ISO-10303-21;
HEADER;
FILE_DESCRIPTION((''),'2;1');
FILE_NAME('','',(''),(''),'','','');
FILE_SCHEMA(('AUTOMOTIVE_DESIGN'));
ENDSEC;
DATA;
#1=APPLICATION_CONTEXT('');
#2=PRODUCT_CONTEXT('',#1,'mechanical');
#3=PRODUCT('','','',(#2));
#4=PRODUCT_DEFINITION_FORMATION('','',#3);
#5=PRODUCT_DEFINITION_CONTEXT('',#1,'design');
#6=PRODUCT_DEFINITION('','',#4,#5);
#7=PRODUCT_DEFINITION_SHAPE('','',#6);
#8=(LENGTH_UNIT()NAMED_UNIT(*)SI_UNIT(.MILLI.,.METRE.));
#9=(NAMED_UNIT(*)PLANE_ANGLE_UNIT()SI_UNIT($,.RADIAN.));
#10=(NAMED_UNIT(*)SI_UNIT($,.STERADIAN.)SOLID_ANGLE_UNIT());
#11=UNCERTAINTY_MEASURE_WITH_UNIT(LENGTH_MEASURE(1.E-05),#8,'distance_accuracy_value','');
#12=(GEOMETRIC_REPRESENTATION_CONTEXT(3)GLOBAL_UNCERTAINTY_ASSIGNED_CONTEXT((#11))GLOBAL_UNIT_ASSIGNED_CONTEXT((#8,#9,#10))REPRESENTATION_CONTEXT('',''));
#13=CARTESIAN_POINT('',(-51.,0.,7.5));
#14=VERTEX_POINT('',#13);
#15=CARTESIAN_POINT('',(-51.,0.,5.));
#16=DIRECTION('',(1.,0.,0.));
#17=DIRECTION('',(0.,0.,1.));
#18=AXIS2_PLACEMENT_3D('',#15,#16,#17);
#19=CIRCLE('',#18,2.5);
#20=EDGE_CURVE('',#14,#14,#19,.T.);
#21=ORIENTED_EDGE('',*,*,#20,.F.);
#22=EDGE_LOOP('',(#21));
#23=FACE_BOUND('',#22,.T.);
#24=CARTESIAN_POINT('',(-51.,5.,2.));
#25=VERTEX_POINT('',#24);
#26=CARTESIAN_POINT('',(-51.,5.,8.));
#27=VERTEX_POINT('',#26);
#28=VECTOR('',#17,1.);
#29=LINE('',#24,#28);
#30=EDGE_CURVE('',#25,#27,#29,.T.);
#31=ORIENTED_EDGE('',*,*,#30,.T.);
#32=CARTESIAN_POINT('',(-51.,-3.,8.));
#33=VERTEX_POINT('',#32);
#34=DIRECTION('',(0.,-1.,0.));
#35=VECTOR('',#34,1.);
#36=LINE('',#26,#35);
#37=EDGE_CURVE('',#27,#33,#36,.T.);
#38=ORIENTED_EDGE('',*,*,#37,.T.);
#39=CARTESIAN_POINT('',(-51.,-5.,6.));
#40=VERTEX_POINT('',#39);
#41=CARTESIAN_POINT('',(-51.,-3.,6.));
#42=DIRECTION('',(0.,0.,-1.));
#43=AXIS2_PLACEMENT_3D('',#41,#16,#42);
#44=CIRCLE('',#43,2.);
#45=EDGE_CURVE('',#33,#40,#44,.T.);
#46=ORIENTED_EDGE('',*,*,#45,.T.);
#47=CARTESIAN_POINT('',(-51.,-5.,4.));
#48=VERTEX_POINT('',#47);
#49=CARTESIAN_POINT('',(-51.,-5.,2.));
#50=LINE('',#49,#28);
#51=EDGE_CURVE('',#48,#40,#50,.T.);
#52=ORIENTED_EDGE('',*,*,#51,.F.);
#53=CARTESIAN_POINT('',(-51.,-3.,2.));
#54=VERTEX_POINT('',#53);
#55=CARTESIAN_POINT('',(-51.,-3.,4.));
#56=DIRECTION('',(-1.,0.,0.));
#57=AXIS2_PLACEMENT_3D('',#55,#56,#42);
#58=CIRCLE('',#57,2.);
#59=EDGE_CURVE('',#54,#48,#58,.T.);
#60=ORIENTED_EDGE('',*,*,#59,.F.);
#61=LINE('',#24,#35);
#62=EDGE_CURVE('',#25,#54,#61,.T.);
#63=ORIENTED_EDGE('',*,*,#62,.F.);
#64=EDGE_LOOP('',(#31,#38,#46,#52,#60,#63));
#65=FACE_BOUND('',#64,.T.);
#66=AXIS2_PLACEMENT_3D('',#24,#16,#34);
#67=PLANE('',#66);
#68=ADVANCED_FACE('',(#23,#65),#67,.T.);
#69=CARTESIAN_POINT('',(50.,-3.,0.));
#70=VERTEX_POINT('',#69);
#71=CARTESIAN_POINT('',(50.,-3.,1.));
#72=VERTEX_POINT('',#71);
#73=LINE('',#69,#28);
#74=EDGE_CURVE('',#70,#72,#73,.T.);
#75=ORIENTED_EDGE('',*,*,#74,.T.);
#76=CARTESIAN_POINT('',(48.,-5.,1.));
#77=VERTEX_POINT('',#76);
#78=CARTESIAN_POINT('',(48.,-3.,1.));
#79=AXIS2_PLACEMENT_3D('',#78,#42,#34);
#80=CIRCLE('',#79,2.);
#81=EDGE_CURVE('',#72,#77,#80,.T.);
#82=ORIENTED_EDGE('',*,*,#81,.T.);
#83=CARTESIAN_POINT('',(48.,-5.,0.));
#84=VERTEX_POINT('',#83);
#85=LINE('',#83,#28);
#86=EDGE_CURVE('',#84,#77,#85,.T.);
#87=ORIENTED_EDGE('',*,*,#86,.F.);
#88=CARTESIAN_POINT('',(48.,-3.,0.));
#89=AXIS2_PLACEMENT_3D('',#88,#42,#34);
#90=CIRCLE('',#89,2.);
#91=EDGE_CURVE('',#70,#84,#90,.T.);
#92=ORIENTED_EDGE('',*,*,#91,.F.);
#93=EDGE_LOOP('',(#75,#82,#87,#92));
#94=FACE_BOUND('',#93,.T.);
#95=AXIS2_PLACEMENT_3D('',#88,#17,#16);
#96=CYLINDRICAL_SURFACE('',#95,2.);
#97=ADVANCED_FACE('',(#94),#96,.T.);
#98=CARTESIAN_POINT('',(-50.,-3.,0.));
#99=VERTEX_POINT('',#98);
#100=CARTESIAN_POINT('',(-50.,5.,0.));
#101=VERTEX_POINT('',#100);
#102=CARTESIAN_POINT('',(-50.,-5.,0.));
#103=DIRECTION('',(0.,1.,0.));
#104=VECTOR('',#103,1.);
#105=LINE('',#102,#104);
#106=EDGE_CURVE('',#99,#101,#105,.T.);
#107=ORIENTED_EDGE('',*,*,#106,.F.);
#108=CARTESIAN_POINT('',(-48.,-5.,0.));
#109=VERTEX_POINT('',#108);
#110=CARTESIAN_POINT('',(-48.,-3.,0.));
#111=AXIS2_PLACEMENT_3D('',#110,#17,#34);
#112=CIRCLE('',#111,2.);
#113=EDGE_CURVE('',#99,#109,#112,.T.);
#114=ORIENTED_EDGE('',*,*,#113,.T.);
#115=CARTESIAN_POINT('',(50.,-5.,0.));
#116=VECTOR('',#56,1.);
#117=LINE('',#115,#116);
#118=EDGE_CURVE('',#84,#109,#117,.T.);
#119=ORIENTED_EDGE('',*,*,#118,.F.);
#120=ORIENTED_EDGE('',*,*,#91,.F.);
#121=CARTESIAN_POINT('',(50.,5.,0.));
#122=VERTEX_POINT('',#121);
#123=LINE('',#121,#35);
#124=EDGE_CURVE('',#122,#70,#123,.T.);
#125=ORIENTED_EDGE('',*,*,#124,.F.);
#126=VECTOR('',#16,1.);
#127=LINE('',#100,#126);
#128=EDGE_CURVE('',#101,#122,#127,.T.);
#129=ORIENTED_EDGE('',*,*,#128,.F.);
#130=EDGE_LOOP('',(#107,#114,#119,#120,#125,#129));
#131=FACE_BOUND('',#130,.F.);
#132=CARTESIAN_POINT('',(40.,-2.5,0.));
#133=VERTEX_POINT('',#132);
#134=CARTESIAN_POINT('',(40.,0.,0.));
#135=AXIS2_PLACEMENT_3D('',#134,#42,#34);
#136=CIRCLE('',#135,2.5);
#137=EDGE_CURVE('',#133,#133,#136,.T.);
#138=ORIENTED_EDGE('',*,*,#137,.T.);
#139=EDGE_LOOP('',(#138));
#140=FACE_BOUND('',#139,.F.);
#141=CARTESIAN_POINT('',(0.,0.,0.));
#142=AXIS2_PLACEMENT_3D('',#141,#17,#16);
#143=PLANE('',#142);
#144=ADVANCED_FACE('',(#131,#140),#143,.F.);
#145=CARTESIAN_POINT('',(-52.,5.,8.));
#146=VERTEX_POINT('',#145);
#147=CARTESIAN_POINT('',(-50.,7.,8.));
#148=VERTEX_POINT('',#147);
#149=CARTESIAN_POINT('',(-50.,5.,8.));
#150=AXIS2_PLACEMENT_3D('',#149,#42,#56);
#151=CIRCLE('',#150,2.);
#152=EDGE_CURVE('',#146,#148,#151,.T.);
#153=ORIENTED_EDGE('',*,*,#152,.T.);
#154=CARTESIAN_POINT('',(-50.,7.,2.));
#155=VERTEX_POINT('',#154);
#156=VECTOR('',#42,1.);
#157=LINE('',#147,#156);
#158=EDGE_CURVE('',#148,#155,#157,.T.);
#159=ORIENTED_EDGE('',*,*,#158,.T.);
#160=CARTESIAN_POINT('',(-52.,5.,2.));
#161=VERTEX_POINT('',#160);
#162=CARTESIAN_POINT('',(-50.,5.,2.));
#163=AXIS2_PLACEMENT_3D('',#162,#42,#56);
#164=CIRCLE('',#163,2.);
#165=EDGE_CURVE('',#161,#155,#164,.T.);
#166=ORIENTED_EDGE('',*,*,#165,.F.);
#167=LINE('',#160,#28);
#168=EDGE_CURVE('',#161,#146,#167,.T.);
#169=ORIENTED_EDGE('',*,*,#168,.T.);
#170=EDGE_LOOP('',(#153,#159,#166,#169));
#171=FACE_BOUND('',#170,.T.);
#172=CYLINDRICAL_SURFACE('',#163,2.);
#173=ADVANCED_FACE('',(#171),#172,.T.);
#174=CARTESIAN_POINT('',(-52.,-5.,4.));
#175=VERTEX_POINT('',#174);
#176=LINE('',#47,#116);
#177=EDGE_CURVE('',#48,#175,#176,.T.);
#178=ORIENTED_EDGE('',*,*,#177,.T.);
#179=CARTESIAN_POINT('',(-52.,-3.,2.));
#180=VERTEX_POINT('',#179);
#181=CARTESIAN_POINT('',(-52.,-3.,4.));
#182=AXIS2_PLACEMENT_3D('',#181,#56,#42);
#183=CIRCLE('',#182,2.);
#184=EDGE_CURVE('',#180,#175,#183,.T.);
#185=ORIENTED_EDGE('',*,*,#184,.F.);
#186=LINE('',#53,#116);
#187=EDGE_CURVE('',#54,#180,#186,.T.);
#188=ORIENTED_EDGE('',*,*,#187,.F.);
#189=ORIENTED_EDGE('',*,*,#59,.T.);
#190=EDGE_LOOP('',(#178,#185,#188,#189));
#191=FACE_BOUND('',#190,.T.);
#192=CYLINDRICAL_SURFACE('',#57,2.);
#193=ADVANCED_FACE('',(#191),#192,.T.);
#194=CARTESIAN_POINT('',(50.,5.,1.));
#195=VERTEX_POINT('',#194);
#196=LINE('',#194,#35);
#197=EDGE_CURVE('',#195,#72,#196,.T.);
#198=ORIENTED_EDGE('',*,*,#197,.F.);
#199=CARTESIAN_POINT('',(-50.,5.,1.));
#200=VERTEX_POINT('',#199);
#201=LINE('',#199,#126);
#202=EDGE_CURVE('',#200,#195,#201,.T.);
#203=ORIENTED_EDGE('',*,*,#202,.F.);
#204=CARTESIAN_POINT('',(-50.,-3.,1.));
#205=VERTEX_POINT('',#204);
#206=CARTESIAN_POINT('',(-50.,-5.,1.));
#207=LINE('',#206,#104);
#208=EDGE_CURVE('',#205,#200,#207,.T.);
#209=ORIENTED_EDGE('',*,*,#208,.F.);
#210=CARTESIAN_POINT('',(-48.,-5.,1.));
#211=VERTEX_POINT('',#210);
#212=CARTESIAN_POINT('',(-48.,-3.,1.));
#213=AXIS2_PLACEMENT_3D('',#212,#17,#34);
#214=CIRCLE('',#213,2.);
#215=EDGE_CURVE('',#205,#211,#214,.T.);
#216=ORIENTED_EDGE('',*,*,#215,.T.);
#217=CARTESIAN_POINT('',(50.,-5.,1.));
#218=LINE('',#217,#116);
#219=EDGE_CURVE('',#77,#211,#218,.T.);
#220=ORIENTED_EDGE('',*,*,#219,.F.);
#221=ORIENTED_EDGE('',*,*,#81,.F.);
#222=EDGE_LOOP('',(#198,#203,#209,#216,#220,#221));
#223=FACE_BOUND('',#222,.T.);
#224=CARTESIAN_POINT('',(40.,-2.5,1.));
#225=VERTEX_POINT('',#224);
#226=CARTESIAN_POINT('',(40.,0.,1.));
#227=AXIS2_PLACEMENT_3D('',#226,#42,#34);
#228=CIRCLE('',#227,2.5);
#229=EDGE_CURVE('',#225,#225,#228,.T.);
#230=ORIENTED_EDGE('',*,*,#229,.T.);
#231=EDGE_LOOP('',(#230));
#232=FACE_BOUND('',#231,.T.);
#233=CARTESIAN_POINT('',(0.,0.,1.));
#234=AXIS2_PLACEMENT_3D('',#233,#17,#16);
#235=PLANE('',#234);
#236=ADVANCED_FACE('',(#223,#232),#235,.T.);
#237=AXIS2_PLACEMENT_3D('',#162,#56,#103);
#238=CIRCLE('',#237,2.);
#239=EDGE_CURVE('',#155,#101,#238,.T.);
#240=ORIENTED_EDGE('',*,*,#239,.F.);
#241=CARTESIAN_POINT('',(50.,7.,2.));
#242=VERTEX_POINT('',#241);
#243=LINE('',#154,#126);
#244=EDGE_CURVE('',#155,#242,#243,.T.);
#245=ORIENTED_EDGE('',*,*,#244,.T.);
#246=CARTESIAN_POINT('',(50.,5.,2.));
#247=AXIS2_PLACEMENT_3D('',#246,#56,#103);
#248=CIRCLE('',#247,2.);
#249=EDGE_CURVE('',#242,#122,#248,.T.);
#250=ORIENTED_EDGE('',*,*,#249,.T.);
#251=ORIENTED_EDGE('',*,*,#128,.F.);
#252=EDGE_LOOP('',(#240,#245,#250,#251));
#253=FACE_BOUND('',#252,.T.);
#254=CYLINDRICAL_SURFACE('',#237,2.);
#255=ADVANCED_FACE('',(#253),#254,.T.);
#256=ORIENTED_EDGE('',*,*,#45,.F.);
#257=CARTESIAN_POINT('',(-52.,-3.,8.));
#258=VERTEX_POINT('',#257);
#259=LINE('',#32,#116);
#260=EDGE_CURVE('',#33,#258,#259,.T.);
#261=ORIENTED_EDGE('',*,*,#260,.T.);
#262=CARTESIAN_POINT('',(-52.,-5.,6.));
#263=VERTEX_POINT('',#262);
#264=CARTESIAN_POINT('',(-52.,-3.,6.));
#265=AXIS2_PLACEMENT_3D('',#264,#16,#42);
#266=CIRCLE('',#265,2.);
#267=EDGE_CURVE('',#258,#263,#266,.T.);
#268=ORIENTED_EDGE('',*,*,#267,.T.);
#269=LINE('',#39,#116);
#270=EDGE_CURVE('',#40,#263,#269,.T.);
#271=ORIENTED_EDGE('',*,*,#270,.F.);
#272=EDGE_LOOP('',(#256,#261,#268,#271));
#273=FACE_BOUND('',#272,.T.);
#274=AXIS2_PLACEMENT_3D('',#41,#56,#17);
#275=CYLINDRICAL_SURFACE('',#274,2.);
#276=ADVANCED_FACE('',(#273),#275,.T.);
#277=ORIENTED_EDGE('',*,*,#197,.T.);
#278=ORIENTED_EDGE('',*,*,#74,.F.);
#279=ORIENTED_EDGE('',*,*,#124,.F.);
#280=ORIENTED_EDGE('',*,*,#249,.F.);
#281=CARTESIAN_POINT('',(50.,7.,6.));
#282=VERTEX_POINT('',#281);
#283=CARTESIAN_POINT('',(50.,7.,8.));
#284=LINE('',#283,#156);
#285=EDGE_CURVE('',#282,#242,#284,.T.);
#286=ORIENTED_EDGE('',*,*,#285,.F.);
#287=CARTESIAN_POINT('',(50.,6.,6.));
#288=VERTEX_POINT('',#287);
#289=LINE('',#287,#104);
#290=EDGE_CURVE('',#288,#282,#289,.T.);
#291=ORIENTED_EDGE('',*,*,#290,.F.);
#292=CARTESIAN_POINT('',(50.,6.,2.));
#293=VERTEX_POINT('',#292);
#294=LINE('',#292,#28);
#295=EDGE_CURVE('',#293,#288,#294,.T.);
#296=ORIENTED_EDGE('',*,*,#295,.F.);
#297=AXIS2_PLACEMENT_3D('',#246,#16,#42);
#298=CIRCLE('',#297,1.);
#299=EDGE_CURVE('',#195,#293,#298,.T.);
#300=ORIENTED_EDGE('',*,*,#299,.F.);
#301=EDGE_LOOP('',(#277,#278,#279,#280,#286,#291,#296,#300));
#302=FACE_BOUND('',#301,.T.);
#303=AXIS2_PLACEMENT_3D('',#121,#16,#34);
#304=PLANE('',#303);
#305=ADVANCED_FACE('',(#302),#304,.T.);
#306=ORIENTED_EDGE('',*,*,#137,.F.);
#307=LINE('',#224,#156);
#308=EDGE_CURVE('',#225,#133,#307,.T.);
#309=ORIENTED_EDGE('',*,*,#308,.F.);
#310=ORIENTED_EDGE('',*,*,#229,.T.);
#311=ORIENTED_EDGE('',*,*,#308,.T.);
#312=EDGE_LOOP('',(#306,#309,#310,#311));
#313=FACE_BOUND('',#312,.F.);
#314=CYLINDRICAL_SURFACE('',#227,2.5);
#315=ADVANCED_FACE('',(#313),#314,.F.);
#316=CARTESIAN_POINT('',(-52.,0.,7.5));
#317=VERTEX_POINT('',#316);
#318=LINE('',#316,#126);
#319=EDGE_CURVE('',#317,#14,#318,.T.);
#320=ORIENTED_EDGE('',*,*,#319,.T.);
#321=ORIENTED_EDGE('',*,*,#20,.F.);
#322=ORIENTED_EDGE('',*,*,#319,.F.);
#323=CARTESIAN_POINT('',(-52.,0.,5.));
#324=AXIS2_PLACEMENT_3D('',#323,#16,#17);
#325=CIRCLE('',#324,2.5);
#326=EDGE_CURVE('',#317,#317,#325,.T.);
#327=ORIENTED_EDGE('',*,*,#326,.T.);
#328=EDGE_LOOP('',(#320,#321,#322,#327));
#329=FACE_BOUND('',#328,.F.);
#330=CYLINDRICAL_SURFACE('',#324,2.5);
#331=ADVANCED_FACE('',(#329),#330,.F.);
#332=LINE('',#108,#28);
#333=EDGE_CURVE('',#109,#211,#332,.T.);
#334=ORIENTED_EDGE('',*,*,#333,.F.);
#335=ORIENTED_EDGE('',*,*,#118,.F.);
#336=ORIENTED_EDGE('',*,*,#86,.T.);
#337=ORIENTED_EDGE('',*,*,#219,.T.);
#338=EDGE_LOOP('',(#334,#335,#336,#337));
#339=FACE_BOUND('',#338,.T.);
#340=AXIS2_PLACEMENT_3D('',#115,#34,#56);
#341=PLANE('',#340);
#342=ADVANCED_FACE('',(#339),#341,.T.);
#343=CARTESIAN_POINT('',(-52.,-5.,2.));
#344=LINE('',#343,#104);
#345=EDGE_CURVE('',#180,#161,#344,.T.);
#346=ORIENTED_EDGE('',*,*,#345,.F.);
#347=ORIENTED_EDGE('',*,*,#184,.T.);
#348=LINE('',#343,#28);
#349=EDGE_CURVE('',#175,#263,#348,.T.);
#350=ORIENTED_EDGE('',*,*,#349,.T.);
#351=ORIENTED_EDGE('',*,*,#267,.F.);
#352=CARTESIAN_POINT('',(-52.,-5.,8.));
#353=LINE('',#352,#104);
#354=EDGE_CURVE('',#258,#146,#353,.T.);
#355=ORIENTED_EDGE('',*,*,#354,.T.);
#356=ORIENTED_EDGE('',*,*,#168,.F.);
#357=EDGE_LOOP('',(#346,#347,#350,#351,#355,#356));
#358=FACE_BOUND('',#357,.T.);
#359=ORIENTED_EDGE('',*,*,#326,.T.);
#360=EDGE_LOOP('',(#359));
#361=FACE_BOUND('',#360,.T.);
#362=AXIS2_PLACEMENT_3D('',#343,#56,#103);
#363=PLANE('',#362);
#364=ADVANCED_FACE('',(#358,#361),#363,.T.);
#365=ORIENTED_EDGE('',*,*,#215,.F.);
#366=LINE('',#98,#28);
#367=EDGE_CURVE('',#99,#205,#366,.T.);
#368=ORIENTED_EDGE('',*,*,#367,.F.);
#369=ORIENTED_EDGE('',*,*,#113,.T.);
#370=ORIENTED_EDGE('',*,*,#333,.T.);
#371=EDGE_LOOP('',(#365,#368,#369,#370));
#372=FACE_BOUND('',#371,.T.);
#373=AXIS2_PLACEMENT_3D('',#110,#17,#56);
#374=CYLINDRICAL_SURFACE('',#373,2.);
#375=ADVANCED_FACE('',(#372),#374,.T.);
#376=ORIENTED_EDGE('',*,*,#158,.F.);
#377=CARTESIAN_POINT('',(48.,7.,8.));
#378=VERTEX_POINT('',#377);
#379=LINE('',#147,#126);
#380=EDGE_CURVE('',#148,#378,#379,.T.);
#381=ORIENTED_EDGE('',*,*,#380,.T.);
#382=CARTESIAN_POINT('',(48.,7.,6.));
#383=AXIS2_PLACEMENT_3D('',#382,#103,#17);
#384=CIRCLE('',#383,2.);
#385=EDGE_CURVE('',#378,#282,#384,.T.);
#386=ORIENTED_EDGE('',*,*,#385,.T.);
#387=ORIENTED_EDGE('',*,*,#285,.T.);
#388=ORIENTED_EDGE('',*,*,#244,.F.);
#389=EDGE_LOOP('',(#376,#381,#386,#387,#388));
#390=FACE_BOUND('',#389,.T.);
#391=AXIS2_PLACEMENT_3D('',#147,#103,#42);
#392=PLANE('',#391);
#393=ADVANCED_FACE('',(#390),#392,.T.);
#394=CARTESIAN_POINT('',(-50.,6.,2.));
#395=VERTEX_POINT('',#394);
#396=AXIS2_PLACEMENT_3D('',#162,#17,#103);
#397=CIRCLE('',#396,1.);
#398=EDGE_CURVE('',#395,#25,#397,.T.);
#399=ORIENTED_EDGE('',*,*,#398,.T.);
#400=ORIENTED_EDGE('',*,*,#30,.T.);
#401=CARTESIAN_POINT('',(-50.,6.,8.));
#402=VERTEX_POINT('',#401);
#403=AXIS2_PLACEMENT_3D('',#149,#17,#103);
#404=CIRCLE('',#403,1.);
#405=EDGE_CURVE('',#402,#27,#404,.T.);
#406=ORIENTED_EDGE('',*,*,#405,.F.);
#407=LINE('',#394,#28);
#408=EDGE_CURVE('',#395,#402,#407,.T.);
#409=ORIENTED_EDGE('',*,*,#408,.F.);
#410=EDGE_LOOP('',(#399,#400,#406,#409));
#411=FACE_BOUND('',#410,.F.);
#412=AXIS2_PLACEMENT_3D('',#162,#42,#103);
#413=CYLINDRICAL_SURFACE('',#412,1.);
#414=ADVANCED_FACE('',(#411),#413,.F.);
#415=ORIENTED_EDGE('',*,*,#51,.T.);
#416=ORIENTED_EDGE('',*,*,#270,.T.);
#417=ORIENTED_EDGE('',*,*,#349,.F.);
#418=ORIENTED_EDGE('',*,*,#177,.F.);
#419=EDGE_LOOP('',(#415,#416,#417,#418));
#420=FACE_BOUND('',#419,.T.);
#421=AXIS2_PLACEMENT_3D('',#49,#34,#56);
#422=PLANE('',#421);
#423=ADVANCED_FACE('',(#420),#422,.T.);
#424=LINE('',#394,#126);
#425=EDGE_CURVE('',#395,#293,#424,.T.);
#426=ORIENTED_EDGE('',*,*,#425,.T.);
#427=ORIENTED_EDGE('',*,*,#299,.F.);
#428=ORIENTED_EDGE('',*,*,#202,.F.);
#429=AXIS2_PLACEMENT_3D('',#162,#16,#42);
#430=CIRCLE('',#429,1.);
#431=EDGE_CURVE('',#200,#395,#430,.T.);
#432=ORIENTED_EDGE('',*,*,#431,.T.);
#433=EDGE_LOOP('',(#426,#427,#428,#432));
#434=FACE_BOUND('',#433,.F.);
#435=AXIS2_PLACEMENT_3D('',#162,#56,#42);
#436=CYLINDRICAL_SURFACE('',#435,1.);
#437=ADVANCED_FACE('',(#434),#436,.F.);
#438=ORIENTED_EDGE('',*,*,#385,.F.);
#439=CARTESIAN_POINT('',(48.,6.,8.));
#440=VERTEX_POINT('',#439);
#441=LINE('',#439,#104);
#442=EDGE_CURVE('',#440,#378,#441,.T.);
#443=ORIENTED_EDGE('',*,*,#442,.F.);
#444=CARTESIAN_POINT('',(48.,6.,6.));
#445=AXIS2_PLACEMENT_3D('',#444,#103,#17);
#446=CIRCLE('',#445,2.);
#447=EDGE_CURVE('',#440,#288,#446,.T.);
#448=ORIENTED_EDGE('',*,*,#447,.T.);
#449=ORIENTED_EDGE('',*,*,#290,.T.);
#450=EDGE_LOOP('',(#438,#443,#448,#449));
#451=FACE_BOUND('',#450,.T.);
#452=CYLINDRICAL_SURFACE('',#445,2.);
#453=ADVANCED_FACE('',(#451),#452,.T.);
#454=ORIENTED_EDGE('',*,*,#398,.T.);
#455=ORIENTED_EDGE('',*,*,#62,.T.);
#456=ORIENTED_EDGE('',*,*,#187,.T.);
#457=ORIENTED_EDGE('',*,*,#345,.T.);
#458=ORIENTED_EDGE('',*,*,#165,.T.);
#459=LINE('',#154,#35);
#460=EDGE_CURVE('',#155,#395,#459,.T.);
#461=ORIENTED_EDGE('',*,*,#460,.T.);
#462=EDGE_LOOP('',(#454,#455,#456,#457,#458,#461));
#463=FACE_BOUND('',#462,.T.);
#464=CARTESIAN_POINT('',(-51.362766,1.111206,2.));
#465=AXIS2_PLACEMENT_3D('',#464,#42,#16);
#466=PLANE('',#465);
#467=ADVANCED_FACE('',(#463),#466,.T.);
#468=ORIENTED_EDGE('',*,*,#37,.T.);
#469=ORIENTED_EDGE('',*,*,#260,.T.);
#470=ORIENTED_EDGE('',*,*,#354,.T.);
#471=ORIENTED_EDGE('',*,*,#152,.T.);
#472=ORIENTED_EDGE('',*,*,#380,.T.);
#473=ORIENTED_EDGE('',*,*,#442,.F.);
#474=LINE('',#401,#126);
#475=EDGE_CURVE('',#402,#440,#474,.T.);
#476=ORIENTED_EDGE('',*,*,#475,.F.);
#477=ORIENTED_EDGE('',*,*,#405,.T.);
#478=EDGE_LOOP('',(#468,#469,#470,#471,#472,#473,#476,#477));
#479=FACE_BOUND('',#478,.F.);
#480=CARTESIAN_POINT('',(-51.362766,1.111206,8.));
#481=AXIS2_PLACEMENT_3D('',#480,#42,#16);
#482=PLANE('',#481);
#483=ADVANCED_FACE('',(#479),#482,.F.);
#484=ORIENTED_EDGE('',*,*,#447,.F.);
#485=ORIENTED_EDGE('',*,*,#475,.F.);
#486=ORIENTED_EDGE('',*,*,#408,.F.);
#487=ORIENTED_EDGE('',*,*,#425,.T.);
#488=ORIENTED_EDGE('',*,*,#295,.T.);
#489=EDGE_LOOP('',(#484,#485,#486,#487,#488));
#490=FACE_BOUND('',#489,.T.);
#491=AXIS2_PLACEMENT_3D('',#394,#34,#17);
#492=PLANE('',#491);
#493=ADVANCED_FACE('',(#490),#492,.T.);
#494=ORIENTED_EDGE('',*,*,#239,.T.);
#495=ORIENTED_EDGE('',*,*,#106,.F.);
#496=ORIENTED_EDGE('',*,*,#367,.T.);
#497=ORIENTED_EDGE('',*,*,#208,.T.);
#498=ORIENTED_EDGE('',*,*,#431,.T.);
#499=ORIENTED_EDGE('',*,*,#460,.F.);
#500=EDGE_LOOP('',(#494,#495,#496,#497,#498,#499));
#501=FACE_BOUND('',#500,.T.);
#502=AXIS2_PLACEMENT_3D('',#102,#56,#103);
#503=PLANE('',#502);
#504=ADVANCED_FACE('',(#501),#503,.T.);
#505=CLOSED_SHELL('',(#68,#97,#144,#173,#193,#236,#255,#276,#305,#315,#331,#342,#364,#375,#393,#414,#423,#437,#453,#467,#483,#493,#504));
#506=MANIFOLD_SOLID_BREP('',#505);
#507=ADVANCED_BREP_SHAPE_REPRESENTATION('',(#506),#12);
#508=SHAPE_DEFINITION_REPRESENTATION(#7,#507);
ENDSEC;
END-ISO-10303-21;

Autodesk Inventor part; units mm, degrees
ref_plane "YZ Plane" through (0, 0, 0) normal (1, 0, 0) x (0, 1, 0)
ref_plane "XZ Plane" through (0, 0, 0) normal (0, 1, 0) x (-1, 0, 0)
ref_plane "XY Plane" through (0, 0, 0) normal (0, 0, 1) x (1, 0, 0)
sketch "Schizzo9" plane through (0, 0, 0) normal (0, 0, 1) x (1, 0, 0)
  line L0 (-50, 5) -> (50, 5)
  line L1 (50, 5) -> (50, -5)
  line L2 (50, -5) -> (-50, -5)
  line L3 (-50, -5) -> (-50, 5)
  line L4 (-50, 5) -> (50, -5) construction
  line L5 (50, 5) -> (-50, -5) construction
  point P0 (0, 0)
  dimension "d87" = 100
  dimension "d88" = 10
extrude "Piano6" add sketch "Schizzo9" along normal blind 1
sketch "Schizzo19" plane through (-50, 6, 2) normal (0, 1, 0) x (-1, 0, 0)
  line L0 (-100, 0) -> (0, 0)
  line L1 (0, 0) -> (0, 6)
  line L2 (0, 6) -> (-100, 6)
  line L3 (-100, 6) -> (-100, 0)
edge flange "Flangia9" height 8 angle 90 thickness 1 bend radius 1 thickness toward (0, 1, 0) relief tear relief width 1 relief depth 0.5 edges at (0, 5, 1) wall of the first edge with corners at (50, 6, 2) (-50, 6, 2) (-50, 6, 8) (50, 6, 8)
bend "Piega (Bend)9"
corner "Angolo9"
sketch "Schizzo20" plane through (-51, 5, 2) normal (-1, 0, 0) x (0, -1, 0)
  line L0 (0, 6) -> (0, 0)
  line L1 (0, 0) -> (10, 0)
  line L2 (10, 0) -> (10, 6)
  line L3 (10, 6) -> (0, 6)
edge flange "Flangia10" height 12 angle 90 thickness 1 bend radius 1 thickness toward (-1, 0, 0) relief tear relief width 1 relief depth 0.5 edges at (-50, 6, 5) wall of the first edge with corners at (-51, 5, 8) (-51, 5, 2) (-51, -5, 2) (-51, -5, 8)
bend "Piega (Bend)10"
corner "Angolo10"
sketch "Schizzo21" plane through (0, 0, 1) normal (0, 0, 1) x (1, 0, 0)
  line L0 (50, 5) -> (50, -5) projected
  point P0 (0, 0)
  point P1 (40, 0)
  point P2 (50, 0)
  dimension "d202" = 10
hole "Foro7" at (40, 0, 1) direction (0, 0, -1) diameter 5 end through all
fillet "Arrotondamento angolo7" radius 2 5 edges at (50, 6.5, 8) (50, -5, 0.5) (-50, -5, 0.5) (-51.5, -5, 2) (-51.5, -5, 8)
sketch "Schizzo22" plane through (-52, 5, 2) normal (-1, 0, 0) x (0, 0, 1)
  line L0 (6, 0) -> (6, -8) projected
  line L1 (4, -10) -> (2, -10) projected
  point P0 (-2, -5)
  point P1 (3, -5)
  point P2 (3, -10)
hole "Foro8" at (-52, 0, 5) direction (1, 0, 0) diameter 5 end through all
equation "\"d208\" = Spessore"
equation "\"d217\" = Spessore"
equation "\"d89\" = Spessore"
equation "\"d182\" = LarghezzaScaricoPiega"
equation "\"d183\" = ProfonditàScaricoPiega"
equation "\"d184\" = ResiduoMinimo"
equation "\"d185\" = RaggioTransizione"
equation "\"d188\" = RaggioPiega"
equation "\"d189\" = DimensioniScaricoAngolo"
equation "\"d190\" = DimensioneGioco"
equation "\"d191\" = Dimensione_raggio_Jacobi"
equation "\"d192\" = LarghezzaScaricoPiega"
equation "\"d193\" = ProfonditàScaricoPiega"
equation "\"d194\" = ResiduoMinimo"
equation "\"d195\" = RaggioTransizione"
equation "\"d198\" = RaggioPiega"
equation "\"d199\" = DimensioniScaricoAngolo"
equation "\"d200\" = DimensioneGioco"
equation "\"d201\" = Dimensione_raggio_Jacobi"
equation "\"RaggioPiega\" = Spessore"
equation "\"LarghezzaScaricoPiega\" = Spessore"
equation "\"ProfonditàScaricoPiega\" = 0.5 * Spessore"
equation "\"DimensioniScaricoAngolo\" = 4 * Spessore"
equation "\"ResiduoMinimo\" = 2 * Spessore"
equation "\"RaggioTransizione\" = RaggioPiega"
equation "\"Dimensione_raggio_Jacobi\" = RaggioPiega"
equation "\"DimensioneGioco\" = Spessore"
equation "\"Spessore\" = 1"
properties part number "Lamiera pistone scarico"
